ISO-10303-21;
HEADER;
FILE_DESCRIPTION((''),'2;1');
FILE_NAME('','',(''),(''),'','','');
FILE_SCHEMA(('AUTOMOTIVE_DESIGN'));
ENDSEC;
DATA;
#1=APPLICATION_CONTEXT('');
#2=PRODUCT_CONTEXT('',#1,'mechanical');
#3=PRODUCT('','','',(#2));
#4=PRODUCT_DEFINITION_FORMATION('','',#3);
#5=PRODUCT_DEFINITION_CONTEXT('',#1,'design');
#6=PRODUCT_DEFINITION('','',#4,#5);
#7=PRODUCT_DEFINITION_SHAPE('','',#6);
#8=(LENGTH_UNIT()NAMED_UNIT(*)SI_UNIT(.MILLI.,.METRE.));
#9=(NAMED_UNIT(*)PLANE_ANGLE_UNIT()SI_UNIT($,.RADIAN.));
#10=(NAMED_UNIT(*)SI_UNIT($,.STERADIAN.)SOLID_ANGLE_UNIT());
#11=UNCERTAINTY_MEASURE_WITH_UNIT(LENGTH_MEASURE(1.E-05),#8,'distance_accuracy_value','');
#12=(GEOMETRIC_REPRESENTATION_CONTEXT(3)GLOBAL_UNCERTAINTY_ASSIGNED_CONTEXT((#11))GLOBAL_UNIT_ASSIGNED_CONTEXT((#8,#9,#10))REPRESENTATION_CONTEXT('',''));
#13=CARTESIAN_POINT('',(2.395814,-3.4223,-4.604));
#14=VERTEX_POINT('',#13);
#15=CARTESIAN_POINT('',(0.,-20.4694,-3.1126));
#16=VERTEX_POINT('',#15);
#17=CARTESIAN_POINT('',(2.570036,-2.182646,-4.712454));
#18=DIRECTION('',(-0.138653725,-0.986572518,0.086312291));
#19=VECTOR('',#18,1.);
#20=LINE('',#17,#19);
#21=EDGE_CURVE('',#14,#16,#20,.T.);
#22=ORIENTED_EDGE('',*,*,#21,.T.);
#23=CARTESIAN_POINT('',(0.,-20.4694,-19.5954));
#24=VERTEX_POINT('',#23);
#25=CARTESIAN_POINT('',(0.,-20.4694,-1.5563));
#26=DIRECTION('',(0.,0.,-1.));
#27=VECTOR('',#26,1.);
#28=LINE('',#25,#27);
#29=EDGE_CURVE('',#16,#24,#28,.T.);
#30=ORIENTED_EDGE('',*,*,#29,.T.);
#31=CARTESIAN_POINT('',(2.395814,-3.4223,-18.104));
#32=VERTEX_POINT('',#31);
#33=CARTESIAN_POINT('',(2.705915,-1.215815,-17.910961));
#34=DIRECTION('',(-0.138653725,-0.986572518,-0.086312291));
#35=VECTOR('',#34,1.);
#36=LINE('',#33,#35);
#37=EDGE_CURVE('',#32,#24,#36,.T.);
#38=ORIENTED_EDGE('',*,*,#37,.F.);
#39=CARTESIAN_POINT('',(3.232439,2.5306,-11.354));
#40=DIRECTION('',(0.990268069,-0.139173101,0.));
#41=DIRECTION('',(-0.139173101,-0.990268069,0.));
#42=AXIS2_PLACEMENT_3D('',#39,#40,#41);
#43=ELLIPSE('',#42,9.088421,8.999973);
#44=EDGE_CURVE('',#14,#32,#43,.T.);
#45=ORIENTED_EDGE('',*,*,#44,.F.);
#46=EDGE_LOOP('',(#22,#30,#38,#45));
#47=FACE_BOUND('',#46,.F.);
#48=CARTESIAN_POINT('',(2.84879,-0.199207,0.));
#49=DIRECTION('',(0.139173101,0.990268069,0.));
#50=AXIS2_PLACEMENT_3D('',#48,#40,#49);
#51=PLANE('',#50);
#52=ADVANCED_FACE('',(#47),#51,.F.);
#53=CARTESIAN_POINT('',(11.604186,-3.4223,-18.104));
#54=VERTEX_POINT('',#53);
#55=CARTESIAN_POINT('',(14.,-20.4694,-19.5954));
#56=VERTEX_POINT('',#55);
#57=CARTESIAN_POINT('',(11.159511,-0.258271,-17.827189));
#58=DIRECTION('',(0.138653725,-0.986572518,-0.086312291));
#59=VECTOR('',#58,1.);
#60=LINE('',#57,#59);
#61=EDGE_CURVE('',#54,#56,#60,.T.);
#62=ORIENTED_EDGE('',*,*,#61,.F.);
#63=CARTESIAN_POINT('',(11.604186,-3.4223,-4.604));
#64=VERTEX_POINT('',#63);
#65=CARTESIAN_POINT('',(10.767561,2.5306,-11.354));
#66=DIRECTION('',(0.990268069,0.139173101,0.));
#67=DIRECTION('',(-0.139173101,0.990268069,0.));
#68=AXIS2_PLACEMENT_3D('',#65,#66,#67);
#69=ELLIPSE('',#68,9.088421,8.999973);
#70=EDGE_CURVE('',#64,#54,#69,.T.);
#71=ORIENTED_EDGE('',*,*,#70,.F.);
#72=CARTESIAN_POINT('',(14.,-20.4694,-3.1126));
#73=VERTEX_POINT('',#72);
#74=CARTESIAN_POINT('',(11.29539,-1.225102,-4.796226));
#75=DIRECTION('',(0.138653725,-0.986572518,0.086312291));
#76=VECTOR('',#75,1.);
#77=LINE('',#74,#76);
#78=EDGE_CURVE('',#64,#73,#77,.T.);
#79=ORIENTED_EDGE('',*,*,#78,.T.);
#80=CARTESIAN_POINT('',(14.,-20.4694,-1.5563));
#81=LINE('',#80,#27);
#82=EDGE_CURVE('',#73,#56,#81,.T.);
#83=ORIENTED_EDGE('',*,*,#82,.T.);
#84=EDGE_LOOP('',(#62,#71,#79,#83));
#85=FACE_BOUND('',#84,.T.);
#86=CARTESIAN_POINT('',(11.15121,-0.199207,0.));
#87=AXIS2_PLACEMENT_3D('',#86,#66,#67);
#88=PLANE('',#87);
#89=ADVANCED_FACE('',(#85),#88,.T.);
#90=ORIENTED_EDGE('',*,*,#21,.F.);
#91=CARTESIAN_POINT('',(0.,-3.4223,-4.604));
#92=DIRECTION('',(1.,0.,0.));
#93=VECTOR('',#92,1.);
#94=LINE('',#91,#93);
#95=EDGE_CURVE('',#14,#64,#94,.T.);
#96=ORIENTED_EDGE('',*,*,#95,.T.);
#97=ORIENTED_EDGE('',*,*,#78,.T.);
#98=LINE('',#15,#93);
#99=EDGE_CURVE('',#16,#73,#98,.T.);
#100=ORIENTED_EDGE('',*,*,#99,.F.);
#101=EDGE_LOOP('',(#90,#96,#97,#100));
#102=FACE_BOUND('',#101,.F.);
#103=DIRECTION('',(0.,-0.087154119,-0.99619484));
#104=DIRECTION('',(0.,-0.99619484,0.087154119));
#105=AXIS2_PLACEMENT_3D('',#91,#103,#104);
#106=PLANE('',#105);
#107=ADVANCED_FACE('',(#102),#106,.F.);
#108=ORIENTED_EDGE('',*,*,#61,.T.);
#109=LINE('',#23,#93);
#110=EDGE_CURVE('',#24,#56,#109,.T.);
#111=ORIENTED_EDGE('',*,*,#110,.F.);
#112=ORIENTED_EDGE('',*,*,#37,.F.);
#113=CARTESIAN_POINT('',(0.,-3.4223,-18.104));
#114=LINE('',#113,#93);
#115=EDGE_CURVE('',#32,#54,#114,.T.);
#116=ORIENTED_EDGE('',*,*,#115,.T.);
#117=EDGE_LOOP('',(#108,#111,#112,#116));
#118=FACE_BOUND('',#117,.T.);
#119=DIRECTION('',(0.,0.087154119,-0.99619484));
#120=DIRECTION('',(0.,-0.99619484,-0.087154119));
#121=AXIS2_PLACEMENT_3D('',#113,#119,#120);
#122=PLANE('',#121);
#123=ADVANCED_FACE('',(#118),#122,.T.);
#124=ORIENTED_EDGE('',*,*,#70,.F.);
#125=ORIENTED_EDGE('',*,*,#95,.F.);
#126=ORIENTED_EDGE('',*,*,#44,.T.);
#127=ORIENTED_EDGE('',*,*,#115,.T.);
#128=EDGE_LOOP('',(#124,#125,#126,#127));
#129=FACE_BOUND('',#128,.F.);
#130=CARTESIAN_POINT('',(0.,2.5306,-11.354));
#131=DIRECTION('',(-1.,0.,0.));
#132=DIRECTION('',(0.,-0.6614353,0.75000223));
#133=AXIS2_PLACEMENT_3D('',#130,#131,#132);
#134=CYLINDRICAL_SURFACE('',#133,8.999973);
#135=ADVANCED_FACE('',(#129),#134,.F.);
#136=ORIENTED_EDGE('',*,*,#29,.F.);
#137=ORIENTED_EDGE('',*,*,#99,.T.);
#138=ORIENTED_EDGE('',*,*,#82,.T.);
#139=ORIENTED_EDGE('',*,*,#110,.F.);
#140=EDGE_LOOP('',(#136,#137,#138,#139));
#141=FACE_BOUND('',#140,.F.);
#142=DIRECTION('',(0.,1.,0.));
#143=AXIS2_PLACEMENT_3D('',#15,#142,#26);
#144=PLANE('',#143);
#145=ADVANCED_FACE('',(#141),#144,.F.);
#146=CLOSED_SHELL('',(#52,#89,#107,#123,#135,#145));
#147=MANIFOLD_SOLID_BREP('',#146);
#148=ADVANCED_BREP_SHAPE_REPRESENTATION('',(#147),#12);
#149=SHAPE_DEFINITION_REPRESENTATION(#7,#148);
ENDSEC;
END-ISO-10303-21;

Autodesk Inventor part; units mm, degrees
ref_plane "YZ Plane" through (0, 0, 0) normal (1, 0, 0) x (0, 1, 0)
ref_plane "XZ Plane" through (0, 0, 0) normal (0, 1, 0) x (-1, 0, 0)
ref_plane "XY Plane" through (0, 0, 0) normal (0, 0, 1) x (1, 0, 0)
sketch "Sketch1" plane through (0, 0, 0) normal (1, 0, 0) x (0, 1, 0)
  arc A0 (-3.4223, -4.604) -> (-3.4223, -18.104) centre (2.5306, -11.354) ccw
  line L0 (-20.4694, -3.1126) -> (-20.4694, -19.5954)
  line L1 (-3.4223, -18.104) -> (-20.4694, -19.5954)
  line L2 (-3.4223, -4.604) -> (-20.4694, -3.1126)
  point P0 (0, 0)
  dimension "d5" = 23
  dimension "d21" = 9
  dimension "d28" = 85
extrude "Extrusion1" add sketch "Sketch1" along normal blind 14
draft "FaceDraft3" angle 8 pull direction (0, 1, 0) faces at (0, -15.7807, -10.9914) fixed edges at (0, -20.4694, -11.354)
draft "FaceDraft4" angle 8 pull direction (0, 1, 0) faces at (14, -15.7807, -10.9914) fixed edges at (14, -20.4694, -11.354)
properties part number "BaseGarra"
